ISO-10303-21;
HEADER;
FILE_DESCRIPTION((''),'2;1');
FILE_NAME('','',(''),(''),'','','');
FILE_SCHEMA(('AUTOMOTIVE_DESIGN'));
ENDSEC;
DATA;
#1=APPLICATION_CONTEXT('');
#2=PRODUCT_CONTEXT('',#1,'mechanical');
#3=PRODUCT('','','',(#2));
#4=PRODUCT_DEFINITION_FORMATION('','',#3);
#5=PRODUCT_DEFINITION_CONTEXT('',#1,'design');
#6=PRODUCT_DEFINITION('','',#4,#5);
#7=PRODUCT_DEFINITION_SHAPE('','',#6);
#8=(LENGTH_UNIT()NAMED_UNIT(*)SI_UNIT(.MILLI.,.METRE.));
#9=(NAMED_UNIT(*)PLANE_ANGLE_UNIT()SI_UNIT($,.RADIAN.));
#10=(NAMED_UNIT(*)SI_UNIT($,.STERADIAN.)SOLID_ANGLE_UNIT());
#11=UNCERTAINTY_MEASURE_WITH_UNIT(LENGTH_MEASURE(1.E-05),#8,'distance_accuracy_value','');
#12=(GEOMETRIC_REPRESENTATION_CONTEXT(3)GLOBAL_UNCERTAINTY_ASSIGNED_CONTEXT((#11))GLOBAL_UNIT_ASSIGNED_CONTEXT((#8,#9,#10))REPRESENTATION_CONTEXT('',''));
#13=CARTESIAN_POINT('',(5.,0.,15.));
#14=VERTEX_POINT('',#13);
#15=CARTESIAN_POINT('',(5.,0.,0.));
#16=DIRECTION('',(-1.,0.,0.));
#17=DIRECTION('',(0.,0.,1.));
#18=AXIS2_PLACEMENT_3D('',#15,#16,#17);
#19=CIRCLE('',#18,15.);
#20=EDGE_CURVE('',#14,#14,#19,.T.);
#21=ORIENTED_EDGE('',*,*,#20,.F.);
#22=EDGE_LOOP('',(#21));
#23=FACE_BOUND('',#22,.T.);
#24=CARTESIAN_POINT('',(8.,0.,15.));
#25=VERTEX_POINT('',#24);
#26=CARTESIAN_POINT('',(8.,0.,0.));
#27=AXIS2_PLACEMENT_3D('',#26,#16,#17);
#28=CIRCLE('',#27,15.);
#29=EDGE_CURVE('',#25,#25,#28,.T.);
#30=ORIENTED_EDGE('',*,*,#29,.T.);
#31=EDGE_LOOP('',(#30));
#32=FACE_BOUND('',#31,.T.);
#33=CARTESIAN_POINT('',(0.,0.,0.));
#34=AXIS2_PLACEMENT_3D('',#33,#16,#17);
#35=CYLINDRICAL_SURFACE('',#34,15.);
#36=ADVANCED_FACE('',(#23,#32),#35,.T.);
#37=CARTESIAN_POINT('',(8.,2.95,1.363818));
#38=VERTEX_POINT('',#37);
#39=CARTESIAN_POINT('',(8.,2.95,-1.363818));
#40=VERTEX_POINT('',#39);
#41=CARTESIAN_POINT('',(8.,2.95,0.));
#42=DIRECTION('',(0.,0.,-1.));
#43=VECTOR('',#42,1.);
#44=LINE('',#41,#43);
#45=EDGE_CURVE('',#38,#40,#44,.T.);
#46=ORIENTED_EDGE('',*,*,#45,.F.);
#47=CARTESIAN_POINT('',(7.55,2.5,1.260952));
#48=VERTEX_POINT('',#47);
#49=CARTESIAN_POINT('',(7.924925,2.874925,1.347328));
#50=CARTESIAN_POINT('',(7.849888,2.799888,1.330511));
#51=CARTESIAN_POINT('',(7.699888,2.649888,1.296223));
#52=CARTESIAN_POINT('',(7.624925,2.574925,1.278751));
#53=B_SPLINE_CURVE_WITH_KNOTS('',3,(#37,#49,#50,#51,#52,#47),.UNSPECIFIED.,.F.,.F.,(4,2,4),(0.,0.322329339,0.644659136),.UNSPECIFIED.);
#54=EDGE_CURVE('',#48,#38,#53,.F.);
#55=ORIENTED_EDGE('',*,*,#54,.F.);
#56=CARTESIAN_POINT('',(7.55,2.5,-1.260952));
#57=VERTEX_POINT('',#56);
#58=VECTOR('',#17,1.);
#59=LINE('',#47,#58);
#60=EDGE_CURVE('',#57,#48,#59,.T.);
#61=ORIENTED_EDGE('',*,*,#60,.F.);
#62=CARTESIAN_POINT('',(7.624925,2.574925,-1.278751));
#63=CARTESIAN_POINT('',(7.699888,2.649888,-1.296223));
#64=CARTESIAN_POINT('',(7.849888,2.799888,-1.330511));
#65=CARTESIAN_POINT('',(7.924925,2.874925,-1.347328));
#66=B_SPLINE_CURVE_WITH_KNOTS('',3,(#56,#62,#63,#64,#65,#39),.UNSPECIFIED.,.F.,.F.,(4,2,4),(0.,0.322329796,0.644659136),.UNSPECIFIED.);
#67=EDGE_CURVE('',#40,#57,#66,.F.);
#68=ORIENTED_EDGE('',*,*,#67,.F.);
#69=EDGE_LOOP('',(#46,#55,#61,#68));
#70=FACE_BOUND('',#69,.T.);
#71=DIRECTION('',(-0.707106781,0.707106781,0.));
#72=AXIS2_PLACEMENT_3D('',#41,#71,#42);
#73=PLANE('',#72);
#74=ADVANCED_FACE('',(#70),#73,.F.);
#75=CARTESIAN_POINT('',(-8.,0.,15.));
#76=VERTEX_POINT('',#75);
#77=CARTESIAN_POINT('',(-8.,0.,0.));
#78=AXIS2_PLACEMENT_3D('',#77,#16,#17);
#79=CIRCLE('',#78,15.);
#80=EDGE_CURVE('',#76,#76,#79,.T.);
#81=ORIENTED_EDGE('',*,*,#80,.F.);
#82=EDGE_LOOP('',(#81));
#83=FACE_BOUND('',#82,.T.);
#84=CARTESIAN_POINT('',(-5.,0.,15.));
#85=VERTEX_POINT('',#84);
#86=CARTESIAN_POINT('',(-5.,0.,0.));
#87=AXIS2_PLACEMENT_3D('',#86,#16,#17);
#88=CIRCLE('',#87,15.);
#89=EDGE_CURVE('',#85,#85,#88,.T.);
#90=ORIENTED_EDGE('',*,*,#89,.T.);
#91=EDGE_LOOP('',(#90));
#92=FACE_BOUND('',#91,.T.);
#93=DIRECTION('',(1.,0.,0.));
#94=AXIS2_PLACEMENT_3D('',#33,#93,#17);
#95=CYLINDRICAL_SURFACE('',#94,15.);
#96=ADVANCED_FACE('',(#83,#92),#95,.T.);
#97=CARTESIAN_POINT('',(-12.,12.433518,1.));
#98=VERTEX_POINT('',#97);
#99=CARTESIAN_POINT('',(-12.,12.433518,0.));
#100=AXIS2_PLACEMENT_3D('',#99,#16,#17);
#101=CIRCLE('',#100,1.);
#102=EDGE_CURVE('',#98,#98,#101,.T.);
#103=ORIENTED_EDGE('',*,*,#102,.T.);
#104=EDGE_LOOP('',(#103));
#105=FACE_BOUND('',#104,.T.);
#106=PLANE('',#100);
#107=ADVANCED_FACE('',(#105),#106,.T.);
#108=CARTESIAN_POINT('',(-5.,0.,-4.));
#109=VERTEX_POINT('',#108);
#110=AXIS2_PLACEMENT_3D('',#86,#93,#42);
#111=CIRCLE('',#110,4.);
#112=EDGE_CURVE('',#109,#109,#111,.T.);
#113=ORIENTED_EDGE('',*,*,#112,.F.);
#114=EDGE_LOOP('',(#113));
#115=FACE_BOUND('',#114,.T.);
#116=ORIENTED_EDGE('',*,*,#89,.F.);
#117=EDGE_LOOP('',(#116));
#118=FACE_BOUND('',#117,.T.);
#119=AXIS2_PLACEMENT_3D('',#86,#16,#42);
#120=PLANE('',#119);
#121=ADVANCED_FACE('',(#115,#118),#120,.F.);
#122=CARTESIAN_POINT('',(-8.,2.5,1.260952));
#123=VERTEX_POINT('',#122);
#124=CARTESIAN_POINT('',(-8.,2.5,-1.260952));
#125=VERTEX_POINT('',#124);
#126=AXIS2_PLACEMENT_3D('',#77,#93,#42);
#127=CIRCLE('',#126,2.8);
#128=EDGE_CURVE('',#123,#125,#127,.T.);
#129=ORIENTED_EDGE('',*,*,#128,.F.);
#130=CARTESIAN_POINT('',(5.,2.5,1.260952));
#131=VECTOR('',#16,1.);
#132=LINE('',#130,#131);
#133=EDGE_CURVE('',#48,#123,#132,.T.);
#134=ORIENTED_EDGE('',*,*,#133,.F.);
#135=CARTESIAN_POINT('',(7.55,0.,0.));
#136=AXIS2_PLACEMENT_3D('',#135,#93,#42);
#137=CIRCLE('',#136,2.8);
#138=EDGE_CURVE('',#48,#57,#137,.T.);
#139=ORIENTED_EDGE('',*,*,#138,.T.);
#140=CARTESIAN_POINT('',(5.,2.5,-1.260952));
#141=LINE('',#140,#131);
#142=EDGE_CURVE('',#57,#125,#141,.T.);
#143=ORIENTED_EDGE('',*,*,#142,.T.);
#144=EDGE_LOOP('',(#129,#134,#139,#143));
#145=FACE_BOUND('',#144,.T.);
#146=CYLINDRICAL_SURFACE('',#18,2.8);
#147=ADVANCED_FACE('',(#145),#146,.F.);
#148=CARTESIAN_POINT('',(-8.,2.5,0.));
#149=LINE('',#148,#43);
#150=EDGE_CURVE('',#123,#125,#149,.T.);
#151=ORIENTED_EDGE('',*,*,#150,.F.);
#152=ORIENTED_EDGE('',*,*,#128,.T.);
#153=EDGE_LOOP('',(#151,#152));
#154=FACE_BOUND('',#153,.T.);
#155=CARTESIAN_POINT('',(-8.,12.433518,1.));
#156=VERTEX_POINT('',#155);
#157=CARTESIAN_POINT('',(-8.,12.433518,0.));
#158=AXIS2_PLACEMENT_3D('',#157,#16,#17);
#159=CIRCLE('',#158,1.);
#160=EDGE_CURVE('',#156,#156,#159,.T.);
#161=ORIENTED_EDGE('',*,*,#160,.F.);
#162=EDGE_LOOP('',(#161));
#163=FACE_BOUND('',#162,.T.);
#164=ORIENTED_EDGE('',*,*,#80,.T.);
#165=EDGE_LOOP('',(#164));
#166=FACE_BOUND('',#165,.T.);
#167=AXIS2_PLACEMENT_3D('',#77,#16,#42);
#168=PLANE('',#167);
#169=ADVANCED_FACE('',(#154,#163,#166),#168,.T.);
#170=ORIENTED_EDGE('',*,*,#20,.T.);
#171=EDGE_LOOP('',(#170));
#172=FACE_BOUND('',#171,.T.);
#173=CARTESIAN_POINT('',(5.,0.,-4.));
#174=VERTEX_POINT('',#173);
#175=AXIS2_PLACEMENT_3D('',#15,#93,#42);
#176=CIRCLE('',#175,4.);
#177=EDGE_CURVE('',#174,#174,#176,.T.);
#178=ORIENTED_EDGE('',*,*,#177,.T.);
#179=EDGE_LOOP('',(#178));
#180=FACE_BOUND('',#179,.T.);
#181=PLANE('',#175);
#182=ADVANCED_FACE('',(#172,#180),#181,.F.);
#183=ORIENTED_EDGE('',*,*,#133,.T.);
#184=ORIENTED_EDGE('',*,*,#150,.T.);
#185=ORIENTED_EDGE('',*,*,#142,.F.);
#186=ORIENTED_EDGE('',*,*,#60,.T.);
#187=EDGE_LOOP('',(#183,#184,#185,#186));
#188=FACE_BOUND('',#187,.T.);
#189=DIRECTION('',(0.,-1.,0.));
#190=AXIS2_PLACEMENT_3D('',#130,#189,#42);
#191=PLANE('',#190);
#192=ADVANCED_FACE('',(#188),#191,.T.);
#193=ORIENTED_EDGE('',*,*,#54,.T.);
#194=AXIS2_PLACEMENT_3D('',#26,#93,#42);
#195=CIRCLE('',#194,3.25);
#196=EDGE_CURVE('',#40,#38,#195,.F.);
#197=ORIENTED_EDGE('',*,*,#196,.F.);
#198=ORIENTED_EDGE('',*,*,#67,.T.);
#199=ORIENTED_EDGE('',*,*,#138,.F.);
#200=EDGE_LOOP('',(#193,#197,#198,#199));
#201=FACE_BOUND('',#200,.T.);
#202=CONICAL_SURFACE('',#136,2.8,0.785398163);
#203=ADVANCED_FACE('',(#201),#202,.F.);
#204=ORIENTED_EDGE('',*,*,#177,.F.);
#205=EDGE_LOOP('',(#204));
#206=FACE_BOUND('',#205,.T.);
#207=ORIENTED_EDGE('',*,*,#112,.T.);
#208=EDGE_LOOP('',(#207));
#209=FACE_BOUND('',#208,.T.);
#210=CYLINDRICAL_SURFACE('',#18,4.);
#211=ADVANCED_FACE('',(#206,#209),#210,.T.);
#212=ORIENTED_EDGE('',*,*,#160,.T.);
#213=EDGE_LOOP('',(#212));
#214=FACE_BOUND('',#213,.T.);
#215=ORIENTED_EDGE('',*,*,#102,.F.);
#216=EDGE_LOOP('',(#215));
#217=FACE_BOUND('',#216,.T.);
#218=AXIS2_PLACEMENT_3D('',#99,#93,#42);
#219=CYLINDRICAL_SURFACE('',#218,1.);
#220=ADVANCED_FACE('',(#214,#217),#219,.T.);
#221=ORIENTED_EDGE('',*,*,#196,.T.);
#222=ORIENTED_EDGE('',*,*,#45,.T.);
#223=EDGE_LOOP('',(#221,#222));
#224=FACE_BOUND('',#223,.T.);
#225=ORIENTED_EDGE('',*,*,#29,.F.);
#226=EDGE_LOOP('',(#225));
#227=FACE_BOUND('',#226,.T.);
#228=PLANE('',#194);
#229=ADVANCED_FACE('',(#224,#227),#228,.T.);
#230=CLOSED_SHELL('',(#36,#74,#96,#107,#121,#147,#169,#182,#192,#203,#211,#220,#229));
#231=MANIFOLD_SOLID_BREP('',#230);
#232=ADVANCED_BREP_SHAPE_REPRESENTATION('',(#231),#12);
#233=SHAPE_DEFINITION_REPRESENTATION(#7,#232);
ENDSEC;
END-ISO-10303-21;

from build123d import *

# Parameters (mm, degrees)
SKETCH1_R               = 4
FEMALE_SHAFT_DEPTH      = 5
SKETCH6_W               = 3
SKETCH6_H               = 15
MALE_START              = -8
MALE_SHAFT_INSERT_DEPTH = 16
CHAMFER1_SIZE           = 0.45
SKETCH7_R               = 1
BOSS_EXTRUDE1_DEPTH     = 4


# Read off the part's stored shape, not the designer's step: Male Shaft Insert
with BuildPart() as part:
    # Sketch1 → Female Shaft (new, symmetric)
    with BuildSketch(Plane(origin=(0, 0, 0), x_dir=(0, 0, -1), z_dir=(1, 0, 0))):
        Circle(SKETCH1_R)
        with BuildLine():
            Line((-1.260952021, 2.5), (1.260952021, 2.5))
            ThreePointArc((1.260952021, 2.5), (0, -2.8), (-1.260952021, 2.5))
        make_face(mode=Mode.SUBTRACT)
    extrude(amount=FEMALE_SHAFT_DEPTH, both=True)

    # Sketch6 → Spool Edge (revolve)
    with BuildSketch(Plane.XY, mode=Mode.PRIVATE) as spool_edge_sk:
        with Locations((6.5, 7.5)):
            Rectangle(SKETCH6_W, SKETCH6_H)
    spool_edge = revolve(spool_edge_sk.sketch.rotate(Axis((0, 0, 0), (1, 0, 0)), 90), axis=Axis((0, 0, 0), (1, 0, 0)))

    # Spool Edge Mirror: Spool Edge across plane
    add(spool_edge.mirror(Plane(origin=(0, 0, 0), x_dir=(0, 0, 1), z_dir=(1, 0, 0))))

    # Male Shaft Insert outline → Male Shaft Insert (cut)
    with BuildSketch(Plane(origin=(0, 0, 0), x_dir=(0, 0, -1), z_dir=(1, 0, 0)).offset(MALE_START)):
        with BuildLine():
            Line((1.260952021, 2.5), (-1.260952021, 2.5))
            ThreePointArc((-1.260952021, 2.5), (0, -2.8), (1.260952021, 2.5))
        make_face()
    extrude(amount=MALE_SHAFT_INSERT_DEPTH, mode=Mode.SUBTRACT)

    # Chamfer1
    chamfer1_edges = [part.edges().sort_by_distance(p)[0] for p in [
        (8, 2.5, 0),
        (8, -2.8, 0),
    ]]
    chamfer(chamfer1_edges, length=CHAMFER1_SIZE)

    # Sketch7 → Boss-Extrude1 (add)
    with BuildSketch(Plane.ZY.offset(8)):
        with Locations((0, 12.433518361)):
            Circle(SKETCH7_R)
    extrude(amount=BOSS_EXTRUDE1_DEPTH)


solid = part.part
